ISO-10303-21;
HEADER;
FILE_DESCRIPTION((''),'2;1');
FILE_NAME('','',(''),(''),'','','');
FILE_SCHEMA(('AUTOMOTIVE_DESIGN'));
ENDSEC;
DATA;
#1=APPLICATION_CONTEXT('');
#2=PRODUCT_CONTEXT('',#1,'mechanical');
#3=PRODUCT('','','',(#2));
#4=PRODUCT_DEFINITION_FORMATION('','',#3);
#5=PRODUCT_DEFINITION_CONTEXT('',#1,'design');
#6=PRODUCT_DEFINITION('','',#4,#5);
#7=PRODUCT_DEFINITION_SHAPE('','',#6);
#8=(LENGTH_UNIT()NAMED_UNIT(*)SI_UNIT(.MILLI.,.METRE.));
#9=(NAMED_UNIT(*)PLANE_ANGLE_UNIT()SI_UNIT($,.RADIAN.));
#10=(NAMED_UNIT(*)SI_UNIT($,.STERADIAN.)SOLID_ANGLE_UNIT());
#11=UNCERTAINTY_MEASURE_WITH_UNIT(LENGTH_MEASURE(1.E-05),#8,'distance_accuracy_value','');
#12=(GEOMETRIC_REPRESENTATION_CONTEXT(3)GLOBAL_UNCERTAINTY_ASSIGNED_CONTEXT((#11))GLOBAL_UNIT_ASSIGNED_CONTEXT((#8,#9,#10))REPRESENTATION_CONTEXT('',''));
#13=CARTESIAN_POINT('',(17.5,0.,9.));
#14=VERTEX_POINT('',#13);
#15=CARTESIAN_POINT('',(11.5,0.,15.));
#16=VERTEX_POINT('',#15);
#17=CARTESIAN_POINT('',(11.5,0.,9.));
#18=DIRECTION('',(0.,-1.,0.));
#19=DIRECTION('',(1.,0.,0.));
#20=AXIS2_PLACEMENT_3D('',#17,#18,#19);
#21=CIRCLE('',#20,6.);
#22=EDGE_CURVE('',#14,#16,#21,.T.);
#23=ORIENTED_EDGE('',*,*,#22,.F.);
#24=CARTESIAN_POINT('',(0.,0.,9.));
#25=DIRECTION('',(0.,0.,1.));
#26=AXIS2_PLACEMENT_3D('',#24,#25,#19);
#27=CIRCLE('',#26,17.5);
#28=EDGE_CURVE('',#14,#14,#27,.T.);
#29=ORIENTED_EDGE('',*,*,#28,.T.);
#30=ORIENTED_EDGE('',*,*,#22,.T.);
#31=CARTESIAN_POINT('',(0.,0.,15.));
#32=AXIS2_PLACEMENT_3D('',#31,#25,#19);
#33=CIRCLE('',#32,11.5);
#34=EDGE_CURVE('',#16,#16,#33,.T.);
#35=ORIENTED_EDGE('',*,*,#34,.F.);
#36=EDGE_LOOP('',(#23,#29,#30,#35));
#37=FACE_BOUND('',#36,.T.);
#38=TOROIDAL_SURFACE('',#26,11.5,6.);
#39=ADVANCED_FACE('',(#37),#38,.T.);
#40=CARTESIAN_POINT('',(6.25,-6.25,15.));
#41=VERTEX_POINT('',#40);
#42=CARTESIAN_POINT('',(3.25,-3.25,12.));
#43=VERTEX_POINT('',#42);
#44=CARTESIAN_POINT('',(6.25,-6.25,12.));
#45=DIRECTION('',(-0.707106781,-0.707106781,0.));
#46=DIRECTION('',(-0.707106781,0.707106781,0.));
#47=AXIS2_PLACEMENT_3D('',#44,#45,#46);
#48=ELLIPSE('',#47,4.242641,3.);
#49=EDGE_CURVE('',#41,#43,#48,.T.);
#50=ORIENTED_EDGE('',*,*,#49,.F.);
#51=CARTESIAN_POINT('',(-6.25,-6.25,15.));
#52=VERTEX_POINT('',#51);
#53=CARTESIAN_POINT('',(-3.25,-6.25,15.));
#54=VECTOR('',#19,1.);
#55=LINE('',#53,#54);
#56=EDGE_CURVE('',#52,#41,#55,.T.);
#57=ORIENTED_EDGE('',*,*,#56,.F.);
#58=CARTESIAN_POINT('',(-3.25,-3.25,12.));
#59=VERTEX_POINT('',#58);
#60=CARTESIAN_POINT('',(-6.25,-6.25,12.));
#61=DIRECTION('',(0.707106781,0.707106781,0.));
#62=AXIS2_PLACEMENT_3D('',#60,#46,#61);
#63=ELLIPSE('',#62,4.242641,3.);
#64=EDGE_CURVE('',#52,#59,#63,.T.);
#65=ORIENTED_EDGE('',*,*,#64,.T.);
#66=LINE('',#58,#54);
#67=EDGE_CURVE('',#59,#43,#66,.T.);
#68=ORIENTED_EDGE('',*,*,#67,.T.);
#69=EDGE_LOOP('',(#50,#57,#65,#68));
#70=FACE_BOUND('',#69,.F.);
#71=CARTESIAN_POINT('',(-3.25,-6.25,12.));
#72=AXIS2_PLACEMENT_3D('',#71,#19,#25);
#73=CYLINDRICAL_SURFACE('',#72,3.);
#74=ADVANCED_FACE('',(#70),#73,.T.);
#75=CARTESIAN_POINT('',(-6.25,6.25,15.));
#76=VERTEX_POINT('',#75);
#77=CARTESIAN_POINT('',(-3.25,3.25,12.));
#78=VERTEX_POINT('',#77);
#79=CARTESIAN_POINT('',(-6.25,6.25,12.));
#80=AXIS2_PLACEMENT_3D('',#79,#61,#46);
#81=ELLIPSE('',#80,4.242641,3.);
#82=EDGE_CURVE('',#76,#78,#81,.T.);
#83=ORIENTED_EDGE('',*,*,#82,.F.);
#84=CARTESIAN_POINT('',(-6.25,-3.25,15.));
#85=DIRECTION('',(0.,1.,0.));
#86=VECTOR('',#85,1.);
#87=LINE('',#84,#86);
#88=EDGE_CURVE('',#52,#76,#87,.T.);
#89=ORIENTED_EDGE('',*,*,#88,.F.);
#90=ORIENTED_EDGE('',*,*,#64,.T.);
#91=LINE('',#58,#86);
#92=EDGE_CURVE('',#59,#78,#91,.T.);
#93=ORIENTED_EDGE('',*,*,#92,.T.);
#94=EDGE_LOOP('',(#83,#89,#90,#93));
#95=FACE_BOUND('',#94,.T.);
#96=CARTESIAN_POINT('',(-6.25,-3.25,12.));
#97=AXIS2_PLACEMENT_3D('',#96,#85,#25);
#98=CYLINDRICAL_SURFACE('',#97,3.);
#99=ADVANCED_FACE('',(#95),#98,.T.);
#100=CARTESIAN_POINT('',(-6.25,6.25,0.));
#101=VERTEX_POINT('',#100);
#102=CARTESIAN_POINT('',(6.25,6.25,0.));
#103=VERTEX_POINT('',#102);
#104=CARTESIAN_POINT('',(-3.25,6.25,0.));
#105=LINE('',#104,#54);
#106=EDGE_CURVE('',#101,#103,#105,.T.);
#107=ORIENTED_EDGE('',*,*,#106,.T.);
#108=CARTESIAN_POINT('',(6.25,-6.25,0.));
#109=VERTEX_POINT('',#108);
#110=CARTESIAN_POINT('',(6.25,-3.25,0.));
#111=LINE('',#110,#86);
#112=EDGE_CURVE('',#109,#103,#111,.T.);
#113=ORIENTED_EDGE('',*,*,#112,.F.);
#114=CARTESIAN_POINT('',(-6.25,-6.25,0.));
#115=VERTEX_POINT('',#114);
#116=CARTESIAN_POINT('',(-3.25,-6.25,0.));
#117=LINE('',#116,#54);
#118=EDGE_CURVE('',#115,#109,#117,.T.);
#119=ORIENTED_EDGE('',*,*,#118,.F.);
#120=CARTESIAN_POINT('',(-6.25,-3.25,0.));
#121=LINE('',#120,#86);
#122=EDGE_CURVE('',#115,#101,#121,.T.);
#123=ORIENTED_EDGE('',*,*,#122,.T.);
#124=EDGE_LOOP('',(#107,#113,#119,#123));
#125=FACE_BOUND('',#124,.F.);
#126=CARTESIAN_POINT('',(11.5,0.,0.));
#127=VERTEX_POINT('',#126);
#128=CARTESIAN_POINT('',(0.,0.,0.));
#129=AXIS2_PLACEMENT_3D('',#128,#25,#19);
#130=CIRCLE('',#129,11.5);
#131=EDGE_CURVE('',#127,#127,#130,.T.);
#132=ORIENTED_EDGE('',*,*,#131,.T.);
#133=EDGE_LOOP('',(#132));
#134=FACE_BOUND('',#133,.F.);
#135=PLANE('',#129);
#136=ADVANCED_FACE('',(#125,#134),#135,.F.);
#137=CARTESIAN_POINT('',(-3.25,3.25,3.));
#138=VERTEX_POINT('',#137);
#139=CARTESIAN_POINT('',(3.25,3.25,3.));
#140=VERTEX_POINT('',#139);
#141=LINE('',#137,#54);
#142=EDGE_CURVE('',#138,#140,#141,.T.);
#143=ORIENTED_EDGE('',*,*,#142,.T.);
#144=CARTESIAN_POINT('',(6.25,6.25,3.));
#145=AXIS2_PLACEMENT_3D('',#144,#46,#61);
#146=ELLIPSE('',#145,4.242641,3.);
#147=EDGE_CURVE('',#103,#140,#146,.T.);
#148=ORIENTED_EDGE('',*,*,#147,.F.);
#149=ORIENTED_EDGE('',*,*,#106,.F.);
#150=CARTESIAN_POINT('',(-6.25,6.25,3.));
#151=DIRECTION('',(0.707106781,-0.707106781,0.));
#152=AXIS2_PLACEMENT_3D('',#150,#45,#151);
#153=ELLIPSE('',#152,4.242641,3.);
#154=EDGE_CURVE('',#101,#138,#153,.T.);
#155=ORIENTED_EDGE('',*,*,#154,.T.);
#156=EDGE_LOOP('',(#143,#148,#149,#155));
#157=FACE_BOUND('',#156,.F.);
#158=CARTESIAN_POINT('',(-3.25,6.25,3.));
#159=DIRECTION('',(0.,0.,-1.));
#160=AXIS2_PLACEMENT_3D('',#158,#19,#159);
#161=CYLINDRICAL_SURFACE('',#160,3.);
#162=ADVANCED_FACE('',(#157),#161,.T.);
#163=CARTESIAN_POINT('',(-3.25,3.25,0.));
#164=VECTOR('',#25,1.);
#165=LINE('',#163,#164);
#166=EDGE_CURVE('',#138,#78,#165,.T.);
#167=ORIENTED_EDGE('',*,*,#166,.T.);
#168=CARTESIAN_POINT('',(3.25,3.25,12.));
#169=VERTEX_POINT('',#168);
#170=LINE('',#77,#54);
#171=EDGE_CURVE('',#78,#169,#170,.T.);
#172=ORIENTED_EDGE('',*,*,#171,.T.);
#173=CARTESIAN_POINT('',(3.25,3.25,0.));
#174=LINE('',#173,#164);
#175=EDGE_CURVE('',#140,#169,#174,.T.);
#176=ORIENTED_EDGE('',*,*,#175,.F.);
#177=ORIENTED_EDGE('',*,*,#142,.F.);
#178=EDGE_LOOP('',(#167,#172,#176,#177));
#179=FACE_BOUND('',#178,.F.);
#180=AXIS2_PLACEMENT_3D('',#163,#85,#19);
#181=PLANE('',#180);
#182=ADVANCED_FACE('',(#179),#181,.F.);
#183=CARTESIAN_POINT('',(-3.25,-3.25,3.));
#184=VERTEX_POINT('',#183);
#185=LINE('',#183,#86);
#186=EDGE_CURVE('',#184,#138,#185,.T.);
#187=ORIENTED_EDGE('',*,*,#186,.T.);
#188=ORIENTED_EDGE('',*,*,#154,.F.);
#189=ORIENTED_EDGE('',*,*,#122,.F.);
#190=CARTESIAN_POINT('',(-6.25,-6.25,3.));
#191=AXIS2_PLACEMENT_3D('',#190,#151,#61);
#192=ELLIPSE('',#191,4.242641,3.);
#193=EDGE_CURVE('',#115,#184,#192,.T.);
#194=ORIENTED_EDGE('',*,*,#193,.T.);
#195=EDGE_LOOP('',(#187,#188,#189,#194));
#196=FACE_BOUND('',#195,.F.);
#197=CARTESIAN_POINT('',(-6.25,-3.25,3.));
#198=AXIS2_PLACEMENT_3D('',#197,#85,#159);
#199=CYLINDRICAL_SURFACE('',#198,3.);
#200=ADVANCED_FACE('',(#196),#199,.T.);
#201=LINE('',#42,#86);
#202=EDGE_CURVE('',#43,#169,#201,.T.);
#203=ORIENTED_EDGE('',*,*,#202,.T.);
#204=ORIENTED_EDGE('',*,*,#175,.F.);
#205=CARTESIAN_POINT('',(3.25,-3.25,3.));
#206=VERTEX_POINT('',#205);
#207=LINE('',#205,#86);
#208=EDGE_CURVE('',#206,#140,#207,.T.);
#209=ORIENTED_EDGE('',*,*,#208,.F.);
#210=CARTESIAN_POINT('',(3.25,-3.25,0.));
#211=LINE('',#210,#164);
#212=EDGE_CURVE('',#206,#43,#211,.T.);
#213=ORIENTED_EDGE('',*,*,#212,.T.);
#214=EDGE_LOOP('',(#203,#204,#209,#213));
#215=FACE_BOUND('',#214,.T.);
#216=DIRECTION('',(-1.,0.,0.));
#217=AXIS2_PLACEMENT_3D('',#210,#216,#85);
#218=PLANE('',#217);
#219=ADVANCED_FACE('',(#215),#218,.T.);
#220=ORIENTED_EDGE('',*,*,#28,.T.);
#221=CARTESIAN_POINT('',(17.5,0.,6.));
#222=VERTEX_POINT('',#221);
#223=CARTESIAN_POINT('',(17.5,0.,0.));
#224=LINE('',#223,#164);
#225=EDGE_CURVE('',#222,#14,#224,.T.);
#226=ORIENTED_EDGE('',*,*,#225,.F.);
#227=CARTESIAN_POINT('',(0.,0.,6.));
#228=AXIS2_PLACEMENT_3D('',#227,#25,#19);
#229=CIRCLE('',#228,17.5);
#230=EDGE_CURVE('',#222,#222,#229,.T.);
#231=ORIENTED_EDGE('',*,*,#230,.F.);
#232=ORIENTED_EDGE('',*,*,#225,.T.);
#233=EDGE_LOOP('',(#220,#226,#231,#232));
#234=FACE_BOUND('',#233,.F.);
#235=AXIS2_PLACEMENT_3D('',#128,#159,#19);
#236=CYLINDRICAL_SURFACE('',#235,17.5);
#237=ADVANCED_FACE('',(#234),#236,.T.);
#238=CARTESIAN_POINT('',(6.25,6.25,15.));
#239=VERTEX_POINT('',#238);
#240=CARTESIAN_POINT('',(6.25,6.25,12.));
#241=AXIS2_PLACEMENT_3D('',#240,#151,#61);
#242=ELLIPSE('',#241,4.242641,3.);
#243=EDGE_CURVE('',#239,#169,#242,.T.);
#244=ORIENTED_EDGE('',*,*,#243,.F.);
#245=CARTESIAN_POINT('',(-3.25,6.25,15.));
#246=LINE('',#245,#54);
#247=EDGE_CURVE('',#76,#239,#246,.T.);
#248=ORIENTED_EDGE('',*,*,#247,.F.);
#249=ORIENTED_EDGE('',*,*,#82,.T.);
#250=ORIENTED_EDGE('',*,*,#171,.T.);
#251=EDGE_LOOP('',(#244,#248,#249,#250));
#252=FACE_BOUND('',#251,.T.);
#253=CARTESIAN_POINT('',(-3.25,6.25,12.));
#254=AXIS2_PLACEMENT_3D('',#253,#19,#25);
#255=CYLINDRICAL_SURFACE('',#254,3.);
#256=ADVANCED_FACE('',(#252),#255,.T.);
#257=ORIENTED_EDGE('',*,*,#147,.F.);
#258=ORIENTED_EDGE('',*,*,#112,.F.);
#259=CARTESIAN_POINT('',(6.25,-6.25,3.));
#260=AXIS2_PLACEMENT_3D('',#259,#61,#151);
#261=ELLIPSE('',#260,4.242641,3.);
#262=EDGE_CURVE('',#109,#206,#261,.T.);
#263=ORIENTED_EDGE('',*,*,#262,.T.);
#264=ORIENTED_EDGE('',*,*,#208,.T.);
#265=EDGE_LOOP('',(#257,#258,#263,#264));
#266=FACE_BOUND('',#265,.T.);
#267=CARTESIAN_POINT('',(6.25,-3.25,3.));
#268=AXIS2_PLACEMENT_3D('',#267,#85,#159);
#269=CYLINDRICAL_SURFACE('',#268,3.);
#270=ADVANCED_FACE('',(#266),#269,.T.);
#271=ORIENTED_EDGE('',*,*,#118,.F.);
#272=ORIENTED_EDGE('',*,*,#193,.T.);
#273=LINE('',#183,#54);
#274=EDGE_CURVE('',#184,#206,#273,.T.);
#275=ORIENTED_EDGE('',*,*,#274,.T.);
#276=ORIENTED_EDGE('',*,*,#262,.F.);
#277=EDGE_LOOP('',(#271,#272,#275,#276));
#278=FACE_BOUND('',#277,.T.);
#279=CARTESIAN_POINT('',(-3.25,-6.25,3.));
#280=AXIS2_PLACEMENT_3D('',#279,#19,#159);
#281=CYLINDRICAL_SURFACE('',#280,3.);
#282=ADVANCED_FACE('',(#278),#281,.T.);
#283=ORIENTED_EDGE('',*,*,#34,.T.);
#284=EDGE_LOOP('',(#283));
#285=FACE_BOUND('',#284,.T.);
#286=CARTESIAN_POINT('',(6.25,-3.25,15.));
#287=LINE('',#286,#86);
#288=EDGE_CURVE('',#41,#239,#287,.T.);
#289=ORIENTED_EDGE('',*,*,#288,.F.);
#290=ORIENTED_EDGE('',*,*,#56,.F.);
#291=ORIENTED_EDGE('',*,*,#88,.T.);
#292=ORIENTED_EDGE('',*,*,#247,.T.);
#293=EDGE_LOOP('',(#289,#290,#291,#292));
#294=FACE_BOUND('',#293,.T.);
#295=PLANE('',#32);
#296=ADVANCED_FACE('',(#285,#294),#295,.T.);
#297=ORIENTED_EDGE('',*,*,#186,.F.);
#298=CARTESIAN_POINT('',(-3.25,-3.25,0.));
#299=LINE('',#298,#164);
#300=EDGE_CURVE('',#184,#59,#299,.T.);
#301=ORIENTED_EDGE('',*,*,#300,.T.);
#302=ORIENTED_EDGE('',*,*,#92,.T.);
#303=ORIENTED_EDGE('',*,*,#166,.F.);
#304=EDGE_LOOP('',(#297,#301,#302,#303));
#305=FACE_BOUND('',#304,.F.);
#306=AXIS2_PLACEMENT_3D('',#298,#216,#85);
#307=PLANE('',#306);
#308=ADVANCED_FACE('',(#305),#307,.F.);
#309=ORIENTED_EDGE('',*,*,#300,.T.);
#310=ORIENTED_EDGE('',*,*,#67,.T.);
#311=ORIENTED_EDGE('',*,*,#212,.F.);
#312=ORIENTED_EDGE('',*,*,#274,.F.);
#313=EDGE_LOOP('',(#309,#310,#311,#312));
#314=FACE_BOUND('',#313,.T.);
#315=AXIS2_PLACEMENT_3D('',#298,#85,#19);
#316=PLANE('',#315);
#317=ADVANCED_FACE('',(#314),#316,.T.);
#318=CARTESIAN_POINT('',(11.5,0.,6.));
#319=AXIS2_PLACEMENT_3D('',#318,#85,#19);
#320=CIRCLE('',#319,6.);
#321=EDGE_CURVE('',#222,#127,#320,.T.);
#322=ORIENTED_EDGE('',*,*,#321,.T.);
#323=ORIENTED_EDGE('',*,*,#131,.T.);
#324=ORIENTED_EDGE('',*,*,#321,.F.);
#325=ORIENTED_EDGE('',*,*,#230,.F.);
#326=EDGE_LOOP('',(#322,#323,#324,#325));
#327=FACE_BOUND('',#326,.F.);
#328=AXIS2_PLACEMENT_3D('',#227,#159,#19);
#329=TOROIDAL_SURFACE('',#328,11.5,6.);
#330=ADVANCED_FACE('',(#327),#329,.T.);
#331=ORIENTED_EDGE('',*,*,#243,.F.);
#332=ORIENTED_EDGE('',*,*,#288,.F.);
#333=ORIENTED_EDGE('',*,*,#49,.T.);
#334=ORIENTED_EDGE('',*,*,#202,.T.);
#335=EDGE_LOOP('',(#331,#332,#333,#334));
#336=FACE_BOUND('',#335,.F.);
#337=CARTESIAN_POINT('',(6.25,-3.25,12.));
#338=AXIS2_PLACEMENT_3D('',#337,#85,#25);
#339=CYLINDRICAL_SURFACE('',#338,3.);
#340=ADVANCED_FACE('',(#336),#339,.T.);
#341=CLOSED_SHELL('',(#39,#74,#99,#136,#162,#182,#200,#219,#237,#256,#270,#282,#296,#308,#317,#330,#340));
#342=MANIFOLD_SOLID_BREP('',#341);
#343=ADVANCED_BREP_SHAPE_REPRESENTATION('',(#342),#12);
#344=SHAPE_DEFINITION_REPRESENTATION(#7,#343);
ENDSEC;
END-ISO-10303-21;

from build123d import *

# Parameters (mm, degrees)
F0_R     = 17.5
F0_W     = 6.5
F0_H     = 6.5
F1_DEPTH = 15
F2_R     = 6
F3_R     = 3


# Not quite as in the source:
# - a feature names something its author has since deleted; it is built from what else it names


with BuildPart() as f1:
    # F0 (on Top) → F1 (new body)
    with BuildSketch(Plane.XY):
        Circle(F0_R)
        Rectangle(F0_W, F0_H, mode=Mode.SUBTRACT)
    extrude(amount=F1_DEPTH)

    # F2
    f2_edges = [f1.edges().sort_by_distance(p)[0] for p in [
        (-17.5, 0, 15),
        (-17.5, 0, 0),
    ]]
    fillet(f2_edges, radius=F2_R)

    # F3
    f3_edges = [f1.edges().sort_by_distance(p)[0] for p in [
        (-3.25, 0, 15),
        (0, 3.25, 15),
        (3.25, 0, 15),
        (0, -3.25, 15),
        (0, 3.25, 0),
        (-3.25, 0, 0),
        (0, -3.25, 0),
        (3.25, 0, 0),
    ]]
    fillet(f3_edges, radius=F3_R)


solid = f1.part
